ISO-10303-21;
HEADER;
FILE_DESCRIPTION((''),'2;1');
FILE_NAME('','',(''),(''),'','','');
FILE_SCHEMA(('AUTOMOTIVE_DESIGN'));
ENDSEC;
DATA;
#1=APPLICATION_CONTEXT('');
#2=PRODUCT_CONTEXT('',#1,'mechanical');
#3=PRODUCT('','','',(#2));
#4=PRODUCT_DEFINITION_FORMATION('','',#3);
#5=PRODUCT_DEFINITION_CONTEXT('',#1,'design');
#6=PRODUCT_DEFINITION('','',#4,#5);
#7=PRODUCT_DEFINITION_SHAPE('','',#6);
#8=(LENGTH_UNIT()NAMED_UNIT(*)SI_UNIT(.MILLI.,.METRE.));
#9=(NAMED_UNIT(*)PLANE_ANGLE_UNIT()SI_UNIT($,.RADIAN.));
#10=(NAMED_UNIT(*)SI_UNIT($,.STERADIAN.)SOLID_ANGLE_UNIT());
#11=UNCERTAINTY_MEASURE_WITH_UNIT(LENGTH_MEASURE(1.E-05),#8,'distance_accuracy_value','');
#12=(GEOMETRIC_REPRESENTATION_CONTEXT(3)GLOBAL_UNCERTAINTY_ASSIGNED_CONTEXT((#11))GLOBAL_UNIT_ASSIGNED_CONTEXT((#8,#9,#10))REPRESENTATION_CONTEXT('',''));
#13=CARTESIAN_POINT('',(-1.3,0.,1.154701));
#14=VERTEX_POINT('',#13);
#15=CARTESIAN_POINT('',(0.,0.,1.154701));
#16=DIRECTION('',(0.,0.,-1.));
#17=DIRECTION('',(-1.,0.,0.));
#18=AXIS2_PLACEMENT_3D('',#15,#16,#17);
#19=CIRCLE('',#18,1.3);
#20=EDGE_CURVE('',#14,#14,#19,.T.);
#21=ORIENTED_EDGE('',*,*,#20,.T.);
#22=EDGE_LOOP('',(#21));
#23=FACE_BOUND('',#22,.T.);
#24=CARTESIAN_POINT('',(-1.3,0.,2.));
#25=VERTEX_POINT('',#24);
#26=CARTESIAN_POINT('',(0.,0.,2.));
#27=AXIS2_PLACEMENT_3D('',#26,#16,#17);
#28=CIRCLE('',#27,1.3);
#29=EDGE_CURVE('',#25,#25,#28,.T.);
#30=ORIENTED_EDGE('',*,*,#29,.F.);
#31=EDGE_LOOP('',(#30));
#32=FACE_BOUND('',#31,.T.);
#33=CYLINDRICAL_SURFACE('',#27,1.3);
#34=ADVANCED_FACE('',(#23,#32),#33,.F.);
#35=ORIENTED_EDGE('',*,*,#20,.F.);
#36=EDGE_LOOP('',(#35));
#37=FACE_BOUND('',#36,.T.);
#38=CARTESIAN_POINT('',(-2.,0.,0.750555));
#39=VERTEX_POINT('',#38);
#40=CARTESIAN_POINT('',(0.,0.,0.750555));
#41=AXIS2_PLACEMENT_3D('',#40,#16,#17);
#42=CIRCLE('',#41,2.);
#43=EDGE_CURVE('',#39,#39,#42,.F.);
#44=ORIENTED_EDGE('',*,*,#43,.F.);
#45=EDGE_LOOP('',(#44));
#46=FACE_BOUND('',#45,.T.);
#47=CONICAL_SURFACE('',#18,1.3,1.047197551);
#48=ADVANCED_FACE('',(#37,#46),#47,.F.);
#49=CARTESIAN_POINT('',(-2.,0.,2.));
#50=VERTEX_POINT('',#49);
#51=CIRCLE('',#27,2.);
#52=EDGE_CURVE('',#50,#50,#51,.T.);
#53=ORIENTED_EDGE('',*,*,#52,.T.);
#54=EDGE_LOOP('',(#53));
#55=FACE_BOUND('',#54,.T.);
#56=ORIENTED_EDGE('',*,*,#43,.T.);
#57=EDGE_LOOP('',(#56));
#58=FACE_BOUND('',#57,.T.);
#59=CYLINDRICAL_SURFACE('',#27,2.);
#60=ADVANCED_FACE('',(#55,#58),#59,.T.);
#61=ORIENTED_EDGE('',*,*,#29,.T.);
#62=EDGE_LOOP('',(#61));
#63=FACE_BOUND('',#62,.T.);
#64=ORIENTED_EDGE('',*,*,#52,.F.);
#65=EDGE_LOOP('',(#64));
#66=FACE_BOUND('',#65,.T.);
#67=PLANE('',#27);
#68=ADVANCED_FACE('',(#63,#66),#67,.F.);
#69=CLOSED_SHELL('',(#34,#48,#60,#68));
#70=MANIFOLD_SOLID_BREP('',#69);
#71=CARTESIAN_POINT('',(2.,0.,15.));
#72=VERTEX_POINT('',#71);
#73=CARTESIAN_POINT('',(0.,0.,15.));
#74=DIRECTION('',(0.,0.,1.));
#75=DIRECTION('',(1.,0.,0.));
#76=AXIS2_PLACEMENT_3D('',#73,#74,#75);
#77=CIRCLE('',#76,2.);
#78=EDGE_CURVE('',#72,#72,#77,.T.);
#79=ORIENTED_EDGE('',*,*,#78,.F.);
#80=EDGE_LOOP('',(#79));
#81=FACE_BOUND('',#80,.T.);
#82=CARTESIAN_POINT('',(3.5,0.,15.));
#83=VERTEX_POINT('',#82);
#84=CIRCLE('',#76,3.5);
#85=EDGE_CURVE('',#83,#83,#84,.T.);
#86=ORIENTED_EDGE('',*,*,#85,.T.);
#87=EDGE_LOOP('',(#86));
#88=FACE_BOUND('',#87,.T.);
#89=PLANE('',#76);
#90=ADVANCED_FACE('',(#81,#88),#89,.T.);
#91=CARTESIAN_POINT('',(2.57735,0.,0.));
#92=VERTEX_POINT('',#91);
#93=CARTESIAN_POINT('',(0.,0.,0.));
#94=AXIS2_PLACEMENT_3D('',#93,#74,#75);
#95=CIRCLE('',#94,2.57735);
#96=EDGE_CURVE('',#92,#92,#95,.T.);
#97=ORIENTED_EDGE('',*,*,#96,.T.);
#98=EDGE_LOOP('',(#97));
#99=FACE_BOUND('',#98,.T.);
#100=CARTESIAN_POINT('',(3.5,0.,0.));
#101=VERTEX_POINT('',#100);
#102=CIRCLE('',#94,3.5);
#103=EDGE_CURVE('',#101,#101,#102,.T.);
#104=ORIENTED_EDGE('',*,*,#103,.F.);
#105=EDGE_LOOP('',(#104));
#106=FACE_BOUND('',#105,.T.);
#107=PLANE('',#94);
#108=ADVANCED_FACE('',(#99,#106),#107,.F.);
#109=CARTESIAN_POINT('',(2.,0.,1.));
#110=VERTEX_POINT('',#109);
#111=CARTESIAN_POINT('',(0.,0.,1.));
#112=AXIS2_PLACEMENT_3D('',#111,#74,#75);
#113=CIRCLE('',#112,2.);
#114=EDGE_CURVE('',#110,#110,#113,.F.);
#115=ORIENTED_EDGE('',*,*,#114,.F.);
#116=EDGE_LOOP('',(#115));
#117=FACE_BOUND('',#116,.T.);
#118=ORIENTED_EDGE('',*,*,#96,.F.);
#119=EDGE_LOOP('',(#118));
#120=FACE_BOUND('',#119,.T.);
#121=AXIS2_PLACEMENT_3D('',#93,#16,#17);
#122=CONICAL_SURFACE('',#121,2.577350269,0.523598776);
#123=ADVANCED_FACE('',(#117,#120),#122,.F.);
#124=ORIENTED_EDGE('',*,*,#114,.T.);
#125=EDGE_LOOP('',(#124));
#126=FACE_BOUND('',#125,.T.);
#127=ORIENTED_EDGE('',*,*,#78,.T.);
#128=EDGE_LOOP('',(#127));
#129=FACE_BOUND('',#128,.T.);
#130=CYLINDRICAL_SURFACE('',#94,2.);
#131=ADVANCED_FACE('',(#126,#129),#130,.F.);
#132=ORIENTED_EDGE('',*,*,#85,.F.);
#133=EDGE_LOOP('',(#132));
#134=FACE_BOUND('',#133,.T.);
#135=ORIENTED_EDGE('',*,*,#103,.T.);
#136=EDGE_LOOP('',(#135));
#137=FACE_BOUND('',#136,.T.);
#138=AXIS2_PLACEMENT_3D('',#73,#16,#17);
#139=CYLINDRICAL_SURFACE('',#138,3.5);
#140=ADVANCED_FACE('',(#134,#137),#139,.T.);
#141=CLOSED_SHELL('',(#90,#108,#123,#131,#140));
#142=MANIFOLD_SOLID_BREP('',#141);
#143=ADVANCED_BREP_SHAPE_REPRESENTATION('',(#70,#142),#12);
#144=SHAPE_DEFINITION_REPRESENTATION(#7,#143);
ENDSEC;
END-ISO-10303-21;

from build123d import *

# Parameters (mm, degrees)
SCHIZZO1_R                   = 3.5
ESTRUSIONE_ESTRUSIONE1_DEPTH = 15
SCHIZZO2_R                   = 2
TAGLIO_ESTRUSIONE1_DEPTH     = 16.795568999
SCHIZZO3_R                   = 2
SCHIZZO3_R_2                 = 1.3
ESTRUSIONE_ESTRUSIONE2_DEPTH = 2
SMUSSO1_SIZE                 = 1.154700538
SMUSSO1_SIZE_2               = 2
SMUSSO2_SIZE                 = 1
SMUSSO2_SIZE2                = 0.577350269


with BuildPart() as part:
    # Schizzo1 → Estrusione-Estrusione1 (new body)
    with BuildSketch(Plane.XY):
        Circle(SCHIZZO1_R)
    extrude(amount=ESTRUSIONE_ESTRUSIONE1_DEPTH)

    # Schizzo2 → Taglio-Estrusione1 (cut, through all)
    with BuildSketch(Plane.XY.offset(15)):
        Circle(SCHIZZO2_R)
    extrude(amount=-TAGLIO_ESTRUSIONE1_DEPTH, mode=Mode.SUBTRACT)

    # Smusso2
    smusso2_edges = [part.edges().sort_by_distance(p)[0] for p in [
        (-2, 0, 0),
    ]]
    smusso2_side = [part.faces().sort_by_distance(p)[0] for p in [
        (-2, 0, 7.5),
    ]]
    chamfer(smusso2_edges, length=SMUSSO2_SIZE, length2=SMUSSO2_SIZE2, reference=smusso2_side[0])


with BuildPart() as body_2:
    # Schizzo3 → Estrusione-Estrusione2 (new body)
    with BuildSketch(Plane(origin=(0, 0, 0), x_dir=(-1, 0, 0), z_dir=(0, 0, -1))):
        Circle(SCHIZZO3_R)
        Circle(SCHIZZO3_R_2, mode=Mode.SUBTRACT)
    extrude(amount=-ESTRUSIONE_ESTRUSIONE2_DEPTH)

    # Smusso1
    # the kernel refuses this chamfer: 2, 1.154700538 mm, written as the material it takes off along each edge
    with BuildSketch(Plane(origin=(0, 0, 0), x_dir=(-1, 0, 0), z_dir=(0, -1, 0))) as smusso1_piece_1:
        Polygon((1.3, -SMUSSO1_SIZE), (1.3 + SMUSSO1_SIZE_2, 0), (1.3, 0), align=None)
    revolve(axis=Axis((0, 0, 0), (0, 0, -1)), mode=Mode.SUBTRACT)


solid = Compound([part.part, body_2.part])
